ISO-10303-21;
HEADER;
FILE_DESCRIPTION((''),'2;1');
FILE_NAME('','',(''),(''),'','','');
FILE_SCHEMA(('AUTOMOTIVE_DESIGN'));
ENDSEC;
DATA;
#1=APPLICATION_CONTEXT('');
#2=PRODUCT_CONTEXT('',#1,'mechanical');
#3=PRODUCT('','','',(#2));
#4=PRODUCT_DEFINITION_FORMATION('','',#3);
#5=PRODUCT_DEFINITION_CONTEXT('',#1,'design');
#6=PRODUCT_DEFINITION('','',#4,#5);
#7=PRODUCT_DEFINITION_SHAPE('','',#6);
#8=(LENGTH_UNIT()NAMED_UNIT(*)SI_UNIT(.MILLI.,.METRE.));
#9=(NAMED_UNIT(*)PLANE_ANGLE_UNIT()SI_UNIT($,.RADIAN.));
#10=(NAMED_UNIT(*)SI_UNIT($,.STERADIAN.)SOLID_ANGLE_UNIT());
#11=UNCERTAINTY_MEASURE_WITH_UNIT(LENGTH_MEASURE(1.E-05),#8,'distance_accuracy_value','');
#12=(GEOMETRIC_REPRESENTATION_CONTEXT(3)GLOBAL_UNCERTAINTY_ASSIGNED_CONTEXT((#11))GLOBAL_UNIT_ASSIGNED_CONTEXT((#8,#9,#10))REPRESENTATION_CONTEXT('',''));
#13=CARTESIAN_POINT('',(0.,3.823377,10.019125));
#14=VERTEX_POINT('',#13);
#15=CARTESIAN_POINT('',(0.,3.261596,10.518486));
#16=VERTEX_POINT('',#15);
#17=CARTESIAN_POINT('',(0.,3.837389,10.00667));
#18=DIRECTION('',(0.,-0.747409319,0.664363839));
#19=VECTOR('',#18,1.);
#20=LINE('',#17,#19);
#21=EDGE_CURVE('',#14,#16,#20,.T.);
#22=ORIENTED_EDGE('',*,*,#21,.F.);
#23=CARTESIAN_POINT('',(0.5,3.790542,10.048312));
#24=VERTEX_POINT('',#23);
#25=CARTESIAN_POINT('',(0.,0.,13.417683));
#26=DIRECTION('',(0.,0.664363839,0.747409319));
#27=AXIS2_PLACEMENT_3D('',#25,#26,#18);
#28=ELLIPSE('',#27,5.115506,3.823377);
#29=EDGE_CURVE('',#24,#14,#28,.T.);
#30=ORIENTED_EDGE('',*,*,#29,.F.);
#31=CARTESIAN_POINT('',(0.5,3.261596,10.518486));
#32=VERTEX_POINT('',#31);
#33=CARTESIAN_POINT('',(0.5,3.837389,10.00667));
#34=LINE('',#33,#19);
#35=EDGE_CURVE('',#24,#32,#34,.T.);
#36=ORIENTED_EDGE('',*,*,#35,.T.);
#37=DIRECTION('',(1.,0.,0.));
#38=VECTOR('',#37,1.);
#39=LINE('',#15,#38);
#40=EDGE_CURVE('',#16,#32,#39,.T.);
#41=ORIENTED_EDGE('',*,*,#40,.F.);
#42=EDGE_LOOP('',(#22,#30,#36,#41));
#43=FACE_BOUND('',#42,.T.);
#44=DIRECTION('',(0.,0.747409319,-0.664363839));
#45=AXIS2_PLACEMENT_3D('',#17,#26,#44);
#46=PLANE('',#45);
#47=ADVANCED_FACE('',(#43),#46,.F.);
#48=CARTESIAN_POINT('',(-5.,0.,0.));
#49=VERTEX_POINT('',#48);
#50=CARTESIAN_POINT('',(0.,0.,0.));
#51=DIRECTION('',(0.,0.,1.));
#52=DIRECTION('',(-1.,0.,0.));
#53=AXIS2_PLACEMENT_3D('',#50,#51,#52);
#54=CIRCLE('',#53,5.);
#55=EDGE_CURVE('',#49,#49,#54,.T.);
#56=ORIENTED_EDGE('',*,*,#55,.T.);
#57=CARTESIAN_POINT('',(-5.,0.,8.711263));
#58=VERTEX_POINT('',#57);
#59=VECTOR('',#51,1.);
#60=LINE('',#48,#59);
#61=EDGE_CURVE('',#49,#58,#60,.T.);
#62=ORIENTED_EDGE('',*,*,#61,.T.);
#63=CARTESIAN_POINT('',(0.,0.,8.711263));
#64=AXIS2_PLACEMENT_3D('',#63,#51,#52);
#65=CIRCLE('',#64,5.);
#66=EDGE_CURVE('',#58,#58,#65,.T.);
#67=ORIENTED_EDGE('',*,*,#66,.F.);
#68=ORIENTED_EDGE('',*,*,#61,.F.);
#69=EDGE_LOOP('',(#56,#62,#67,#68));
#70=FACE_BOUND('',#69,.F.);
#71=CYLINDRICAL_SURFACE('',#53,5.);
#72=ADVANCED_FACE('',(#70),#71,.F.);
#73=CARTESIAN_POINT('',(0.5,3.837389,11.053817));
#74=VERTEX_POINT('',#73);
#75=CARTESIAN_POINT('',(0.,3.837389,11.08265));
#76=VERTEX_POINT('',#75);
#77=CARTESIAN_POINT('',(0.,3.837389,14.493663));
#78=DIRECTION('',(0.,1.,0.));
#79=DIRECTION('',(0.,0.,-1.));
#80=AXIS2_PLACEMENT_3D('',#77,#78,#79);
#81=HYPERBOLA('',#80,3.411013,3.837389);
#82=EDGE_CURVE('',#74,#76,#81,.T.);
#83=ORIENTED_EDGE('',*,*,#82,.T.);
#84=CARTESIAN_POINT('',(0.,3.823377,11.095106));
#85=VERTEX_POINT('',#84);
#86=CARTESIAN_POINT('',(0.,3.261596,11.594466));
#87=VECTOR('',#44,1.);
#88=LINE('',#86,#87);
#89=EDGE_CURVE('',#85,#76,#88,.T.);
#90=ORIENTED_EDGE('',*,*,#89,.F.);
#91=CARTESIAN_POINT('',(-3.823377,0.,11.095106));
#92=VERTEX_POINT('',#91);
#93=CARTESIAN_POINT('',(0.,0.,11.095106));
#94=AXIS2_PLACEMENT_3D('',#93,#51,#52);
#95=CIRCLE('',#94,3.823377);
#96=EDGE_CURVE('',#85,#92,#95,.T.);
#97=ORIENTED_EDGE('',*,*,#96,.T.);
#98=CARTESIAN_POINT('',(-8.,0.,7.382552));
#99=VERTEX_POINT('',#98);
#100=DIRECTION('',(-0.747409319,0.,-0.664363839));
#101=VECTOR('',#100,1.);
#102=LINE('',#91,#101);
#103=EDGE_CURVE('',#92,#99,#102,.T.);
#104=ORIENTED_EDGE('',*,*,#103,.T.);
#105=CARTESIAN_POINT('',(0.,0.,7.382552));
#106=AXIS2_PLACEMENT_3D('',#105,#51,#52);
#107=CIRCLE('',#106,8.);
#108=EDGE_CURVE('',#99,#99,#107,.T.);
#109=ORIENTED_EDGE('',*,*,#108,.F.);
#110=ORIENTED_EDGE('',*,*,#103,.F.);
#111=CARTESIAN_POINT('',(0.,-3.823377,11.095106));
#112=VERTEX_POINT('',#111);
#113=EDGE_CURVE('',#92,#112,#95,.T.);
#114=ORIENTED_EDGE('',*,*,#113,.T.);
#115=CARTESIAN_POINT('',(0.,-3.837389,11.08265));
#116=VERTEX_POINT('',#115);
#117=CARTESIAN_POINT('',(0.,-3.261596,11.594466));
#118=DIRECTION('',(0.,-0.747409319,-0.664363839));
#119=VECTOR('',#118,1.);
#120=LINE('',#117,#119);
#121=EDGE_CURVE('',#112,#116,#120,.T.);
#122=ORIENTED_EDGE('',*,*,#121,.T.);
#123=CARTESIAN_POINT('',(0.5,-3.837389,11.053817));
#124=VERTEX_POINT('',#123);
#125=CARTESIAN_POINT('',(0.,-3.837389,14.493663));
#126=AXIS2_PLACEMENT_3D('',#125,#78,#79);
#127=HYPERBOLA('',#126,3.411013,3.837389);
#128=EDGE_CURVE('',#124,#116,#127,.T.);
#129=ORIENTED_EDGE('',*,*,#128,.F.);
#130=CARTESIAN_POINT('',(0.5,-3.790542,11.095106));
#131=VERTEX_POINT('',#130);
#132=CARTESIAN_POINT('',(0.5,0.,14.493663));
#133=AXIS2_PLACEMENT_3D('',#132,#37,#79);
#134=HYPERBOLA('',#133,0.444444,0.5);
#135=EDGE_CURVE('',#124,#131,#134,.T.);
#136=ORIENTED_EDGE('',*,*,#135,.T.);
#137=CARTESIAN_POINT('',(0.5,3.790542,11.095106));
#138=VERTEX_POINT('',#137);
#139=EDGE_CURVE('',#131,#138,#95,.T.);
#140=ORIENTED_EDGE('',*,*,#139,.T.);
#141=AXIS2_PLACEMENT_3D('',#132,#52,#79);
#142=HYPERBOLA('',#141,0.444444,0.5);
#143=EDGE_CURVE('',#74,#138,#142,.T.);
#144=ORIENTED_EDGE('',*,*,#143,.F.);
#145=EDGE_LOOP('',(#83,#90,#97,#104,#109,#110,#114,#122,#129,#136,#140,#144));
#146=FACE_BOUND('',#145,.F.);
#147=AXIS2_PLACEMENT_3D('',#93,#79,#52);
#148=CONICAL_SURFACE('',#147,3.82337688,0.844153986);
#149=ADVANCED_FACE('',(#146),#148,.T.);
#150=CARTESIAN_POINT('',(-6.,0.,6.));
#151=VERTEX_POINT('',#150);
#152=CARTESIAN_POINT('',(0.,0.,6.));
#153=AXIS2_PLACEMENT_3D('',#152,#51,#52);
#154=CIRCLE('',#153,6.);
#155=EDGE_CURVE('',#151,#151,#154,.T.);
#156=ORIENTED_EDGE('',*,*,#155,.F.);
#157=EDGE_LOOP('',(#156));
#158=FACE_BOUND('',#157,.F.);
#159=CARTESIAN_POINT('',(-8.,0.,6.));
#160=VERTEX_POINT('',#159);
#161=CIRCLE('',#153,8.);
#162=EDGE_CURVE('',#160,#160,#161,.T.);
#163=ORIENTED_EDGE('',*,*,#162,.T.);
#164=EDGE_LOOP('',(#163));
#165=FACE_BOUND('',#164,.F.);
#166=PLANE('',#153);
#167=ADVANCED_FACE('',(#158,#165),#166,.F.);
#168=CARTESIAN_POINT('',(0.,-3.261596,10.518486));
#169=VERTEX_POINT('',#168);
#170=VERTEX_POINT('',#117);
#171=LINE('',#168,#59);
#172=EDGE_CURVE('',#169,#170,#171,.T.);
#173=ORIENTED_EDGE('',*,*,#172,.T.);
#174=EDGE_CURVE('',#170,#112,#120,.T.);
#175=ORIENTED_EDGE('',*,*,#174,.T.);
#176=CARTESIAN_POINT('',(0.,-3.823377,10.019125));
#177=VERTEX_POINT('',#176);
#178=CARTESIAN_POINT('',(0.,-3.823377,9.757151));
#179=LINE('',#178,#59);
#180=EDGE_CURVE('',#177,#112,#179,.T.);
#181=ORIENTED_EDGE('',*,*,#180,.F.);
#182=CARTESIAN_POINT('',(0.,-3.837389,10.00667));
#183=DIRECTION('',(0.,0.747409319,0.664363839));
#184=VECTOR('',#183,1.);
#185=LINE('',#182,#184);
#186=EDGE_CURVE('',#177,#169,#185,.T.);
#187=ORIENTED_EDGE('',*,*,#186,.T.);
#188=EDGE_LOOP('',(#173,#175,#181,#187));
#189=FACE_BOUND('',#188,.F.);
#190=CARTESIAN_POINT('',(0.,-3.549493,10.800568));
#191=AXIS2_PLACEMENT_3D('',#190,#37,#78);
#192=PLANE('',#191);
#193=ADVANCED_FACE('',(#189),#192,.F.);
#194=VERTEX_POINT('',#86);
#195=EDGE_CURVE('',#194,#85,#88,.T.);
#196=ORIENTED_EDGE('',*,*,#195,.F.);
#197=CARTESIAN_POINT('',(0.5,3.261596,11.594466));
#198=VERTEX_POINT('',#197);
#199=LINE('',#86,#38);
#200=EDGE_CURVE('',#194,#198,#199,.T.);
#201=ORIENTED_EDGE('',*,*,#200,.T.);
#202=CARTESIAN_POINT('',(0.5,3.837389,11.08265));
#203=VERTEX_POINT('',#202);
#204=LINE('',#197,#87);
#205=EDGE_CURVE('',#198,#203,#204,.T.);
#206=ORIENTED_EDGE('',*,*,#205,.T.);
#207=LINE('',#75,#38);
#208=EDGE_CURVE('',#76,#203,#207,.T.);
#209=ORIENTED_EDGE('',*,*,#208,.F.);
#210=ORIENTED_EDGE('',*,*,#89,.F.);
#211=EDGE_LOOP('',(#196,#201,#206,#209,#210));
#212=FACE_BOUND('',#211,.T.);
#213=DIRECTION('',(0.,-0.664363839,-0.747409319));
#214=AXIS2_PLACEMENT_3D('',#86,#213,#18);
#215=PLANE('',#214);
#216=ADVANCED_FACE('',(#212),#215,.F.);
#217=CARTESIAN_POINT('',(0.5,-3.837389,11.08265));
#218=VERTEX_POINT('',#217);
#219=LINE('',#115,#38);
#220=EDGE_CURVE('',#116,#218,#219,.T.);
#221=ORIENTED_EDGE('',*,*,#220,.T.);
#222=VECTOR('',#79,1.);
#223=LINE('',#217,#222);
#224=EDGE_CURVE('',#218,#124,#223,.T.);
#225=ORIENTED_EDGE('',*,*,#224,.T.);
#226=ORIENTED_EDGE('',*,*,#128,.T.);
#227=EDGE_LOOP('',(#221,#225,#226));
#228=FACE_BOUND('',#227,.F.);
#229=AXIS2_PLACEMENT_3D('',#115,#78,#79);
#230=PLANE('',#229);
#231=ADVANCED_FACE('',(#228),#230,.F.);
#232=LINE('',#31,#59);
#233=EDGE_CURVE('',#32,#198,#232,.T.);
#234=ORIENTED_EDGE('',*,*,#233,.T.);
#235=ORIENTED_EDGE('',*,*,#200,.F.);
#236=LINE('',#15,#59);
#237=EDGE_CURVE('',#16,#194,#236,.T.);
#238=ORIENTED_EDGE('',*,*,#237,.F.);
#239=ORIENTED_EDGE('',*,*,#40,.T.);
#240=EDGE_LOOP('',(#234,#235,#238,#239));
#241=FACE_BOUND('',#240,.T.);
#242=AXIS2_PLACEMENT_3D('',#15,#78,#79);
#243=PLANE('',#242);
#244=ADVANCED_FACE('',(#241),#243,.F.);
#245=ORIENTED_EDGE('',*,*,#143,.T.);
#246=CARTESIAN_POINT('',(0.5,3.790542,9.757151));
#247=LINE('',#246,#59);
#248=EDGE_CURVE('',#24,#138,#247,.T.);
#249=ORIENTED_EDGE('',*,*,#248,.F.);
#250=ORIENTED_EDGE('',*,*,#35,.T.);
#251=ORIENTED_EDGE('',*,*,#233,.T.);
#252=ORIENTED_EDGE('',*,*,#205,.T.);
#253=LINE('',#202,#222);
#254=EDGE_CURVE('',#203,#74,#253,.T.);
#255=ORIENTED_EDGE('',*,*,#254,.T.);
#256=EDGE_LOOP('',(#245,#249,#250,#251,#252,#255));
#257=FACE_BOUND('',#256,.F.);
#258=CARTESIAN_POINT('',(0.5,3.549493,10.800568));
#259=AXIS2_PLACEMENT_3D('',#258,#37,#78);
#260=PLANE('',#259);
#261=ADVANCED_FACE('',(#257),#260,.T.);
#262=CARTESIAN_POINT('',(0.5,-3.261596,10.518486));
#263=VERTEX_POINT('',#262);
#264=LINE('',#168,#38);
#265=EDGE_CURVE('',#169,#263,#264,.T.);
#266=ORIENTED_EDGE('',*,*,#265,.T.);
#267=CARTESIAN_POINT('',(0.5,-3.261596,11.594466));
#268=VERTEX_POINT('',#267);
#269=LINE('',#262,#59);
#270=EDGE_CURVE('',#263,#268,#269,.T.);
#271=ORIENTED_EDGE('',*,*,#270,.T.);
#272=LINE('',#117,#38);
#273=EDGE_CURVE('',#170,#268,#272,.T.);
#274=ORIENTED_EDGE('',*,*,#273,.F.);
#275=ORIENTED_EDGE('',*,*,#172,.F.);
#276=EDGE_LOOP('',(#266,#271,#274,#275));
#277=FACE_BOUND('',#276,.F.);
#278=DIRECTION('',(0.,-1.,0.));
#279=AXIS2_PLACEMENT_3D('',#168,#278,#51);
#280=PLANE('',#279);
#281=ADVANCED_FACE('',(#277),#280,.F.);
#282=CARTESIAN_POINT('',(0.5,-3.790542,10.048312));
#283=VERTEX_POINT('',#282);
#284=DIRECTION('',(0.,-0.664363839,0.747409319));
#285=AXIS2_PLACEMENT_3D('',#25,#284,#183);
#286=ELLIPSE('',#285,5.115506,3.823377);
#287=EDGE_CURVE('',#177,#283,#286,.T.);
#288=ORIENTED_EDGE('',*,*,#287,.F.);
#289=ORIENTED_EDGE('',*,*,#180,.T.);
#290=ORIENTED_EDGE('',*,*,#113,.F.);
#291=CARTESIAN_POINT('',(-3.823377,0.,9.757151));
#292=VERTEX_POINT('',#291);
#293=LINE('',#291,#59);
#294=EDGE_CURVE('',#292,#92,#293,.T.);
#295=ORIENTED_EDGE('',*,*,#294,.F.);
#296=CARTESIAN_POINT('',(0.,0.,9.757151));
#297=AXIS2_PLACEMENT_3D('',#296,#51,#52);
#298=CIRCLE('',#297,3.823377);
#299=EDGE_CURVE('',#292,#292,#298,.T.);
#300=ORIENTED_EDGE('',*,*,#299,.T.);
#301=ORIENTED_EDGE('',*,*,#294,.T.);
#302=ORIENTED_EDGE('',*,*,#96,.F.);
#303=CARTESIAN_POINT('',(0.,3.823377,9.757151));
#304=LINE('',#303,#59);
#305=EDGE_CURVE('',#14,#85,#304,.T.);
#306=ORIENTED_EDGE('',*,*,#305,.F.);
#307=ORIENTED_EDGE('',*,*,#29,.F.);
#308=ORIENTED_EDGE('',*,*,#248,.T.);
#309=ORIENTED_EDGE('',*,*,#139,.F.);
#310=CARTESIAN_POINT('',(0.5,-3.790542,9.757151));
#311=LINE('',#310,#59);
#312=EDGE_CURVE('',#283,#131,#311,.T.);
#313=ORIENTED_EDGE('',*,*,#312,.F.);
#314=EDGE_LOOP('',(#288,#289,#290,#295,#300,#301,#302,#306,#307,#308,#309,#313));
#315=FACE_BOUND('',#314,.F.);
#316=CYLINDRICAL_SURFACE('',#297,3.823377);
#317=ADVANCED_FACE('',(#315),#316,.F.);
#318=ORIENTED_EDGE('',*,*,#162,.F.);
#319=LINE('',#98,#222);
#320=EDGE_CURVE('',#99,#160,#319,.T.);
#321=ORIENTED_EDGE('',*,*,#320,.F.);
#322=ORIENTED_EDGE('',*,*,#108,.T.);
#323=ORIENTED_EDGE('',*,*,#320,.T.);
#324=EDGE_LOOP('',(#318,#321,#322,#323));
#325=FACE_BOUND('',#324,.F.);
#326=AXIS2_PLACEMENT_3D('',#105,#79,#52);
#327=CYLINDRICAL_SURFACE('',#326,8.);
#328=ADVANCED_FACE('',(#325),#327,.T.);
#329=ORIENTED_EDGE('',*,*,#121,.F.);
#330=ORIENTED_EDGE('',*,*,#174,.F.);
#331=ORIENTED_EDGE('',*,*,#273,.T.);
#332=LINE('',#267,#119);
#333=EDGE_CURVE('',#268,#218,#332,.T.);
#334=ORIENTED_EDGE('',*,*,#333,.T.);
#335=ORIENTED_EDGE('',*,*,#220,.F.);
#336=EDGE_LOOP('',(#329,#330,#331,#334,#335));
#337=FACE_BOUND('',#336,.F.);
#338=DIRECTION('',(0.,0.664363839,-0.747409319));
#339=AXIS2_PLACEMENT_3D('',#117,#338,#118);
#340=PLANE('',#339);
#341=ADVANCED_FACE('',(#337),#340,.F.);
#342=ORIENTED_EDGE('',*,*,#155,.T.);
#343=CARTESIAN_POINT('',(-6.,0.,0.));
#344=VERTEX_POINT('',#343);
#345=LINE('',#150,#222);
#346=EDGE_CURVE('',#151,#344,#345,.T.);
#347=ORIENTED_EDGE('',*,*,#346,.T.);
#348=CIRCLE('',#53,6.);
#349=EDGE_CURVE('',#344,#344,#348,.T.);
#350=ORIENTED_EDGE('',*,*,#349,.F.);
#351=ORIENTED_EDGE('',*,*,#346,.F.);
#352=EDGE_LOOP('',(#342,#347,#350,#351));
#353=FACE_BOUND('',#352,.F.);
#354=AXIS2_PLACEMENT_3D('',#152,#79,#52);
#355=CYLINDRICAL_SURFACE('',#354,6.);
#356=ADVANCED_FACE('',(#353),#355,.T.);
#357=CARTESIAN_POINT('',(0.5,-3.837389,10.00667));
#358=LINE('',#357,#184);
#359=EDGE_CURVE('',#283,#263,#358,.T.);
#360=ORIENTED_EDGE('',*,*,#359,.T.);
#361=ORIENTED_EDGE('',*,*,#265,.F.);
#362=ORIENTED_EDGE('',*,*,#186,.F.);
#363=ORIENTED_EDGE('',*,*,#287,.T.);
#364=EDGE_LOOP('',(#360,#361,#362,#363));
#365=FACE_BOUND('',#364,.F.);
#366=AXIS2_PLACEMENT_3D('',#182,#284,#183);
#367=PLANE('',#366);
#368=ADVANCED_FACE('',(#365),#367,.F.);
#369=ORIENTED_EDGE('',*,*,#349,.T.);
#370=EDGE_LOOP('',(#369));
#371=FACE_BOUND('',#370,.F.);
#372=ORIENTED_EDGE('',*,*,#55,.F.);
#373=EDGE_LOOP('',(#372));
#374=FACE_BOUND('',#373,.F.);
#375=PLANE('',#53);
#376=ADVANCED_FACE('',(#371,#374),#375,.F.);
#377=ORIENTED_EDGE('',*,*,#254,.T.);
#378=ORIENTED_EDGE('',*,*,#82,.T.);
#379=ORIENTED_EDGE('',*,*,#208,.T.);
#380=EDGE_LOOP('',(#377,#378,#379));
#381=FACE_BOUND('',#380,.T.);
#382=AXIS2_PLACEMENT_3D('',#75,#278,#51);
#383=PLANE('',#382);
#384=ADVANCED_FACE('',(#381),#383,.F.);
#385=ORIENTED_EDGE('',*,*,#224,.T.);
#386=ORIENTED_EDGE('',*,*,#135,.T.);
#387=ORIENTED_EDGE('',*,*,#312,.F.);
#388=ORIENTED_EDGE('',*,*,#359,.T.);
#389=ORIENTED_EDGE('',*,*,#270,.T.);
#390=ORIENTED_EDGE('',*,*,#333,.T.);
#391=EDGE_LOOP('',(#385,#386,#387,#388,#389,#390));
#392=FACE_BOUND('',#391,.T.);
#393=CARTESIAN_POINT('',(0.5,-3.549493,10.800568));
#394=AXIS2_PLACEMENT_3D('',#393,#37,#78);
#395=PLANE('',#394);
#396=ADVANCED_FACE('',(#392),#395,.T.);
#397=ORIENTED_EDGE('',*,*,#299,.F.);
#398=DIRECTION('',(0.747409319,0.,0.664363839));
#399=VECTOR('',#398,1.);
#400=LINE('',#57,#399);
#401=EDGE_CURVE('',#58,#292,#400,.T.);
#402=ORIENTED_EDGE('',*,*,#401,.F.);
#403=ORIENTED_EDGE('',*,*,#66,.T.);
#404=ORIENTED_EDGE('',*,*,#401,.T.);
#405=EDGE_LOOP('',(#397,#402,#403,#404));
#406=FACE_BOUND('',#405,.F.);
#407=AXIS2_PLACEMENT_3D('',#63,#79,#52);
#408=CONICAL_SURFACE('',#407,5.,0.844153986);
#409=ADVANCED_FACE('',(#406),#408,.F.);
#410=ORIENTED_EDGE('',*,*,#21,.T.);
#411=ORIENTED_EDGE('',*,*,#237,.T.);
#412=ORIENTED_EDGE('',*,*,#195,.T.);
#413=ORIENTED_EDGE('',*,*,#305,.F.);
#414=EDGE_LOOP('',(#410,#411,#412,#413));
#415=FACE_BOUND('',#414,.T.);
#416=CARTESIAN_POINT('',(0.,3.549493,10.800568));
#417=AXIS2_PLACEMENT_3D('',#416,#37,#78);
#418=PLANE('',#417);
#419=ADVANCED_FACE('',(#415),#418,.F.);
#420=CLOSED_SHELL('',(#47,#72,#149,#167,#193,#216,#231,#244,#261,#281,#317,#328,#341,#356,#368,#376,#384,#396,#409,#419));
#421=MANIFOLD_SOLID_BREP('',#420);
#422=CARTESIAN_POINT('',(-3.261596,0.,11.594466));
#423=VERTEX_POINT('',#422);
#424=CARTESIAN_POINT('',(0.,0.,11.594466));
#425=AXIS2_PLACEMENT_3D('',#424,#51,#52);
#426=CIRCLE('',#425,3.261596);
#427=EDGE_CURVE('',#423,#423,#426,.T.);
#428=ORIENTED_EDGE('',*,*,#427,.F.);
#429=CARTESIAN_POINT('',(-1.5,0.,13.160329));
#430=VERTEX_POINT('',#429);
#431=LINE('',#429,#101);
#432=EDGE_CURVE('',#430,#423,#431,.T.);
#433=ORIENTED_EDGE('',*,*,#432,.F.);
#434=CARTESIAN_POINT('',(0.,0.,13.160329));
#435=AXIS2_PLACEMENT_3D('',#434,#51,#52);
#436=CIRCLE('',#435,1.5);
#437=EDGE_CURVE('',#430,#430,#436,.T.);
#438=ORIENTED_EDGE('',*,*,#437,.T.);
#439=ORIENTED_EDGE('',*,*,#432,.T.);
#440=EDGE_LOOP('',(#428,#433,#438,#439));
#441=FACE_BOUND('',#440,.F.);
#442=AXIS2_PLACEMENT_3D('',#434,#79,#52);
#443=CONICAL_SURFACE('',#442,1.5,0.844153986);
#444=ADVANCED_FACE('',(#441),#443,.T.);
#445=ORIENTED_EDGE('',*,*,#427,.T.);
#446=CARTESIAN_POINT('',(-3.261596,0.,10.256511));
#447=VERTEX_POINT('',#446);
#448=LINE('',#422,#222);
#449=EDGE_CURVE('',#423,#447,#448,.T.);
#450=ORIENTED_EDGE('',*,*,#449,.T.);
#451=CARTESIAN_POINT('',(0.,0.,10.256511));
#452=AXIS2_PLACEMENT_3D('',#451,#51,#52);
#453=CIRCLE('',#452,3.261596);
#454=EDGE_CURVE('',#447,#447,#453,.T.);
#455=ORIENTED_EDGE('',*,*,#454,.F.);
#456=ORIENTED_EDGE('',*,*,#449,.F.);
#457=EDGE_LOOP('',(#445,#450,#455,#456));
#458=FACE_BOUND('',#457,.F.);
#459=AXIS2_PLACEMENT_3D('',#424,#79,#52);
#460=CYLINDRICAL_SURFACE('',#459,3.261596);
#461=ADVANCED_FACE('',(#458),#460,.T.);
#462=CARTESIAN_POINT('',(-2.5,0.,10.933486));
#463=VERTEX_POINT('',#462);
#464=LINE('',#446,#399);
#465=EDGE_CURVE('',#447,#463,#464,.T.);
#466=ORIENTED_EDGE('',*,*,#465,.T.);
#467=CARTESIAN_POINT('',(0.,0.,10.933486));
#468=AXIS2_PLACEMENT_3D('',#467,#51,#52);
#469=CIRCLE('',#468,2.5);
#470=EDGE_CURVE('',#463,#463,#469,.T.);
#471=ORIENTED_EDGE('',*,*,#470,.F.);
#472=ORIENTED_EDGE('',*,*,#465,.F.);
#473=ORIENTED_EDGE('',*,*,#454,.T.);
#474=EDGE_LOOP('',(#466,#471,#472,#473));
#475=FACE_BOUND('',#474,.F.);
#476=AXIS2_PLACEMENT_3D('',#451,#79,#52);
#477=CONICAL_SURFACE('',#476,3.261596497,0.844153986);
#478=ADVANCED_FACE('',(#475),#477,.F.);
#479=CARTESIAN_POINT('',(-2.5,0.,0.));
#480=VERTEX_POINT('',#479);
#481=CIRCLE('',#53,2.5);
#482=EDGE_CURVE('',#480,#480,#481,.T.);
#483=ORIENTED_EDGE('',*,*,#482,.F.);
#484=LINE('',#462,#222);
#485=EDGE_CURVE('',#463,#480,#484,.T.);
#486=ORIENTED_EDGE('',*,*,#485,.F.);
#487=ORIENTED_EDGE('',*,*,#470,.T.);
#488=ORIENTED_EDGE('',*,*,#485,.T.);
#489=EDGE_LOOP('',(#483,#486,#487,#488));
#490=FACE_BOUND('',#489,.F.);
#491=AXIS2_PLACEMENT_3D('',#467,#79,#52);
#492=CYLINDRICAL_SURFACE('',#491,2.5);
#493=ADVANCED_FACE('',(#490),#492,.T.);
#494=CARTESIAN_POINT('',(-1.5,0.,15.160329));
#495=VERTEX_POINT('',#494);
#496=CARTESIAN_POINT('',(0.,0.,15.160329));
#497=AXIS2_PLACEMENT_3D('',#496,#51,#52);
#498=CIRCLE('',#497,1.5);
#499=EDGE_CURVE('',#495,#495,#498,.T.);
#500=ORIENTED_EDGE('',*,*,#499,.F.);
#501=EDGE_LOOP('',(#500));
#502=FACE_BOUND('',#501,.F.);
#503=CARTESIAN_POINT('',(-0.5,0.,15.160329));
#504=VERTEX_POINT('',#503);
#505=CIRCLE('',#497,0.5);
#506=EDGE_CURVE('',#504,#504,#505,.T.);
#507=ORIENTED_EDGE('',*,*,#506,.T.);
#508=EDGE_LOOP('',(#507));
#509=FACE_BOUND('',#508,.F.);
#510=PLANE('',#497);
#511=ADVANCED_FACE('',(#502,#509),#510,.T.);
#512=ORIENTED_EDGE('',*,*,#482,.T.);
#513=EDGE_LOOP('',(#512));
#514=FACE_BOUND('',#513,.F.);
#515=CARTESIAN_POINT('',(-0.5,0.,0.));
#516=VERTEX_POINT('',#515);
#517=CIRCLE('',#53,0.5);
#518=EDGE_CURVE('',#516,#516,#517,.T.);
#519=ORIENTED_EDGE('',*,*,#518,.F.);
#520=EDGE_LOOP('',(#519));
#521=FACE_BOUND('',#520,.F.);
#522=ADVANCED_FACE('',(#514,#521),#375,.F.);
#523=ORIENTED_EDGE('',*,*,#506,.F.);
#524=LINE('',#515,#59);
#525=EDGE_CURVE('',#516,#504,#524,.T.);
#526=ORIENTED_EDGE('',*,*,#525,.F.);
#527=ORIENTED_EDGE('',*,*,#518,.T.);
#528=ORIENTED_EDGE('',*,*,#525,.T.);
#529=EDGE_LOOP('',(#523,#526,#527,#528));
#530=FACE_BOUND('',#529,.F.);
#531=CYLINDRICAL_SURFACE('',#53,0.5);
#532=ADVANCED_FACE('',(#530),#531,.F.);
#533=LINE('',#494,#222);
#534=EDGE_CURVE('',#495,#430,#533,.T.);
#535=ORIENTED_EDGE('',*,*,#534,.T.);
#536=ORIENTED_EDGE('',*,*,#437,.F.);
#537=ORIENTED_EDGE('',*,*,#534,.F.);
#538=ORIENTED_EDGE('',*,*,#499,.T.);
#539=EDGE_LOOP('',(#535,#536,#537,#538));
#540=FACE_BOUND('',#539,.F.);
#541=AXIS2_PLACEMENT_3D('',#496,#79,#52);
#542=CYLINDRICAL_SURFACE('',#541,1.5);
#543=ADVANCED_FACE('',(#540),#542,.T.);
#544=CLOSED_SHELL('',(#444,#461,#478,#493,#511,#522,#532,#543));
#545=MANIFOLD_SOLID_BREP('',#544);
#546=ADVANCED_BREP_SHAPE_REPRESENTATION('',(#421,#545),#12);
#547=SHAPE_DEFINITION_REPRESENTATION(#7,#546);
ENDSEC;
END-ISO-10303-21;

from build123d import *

# Parameters (mm, degrees)
F3_DEPTH = 0.5


# Not quite as in the source:
# - a pattern or mirror of a feature is missing from the dataset's text; its kind, count and spacing are read off the source's solid


with BuildPart() as f1:
    # F0 (on Front) → F1 (revolve)
    with BuildSketch(Plane.XZ):
        Polygon((-6, 6), (-6, 0), (-5, 0), (-5, 8.7112633561), (-3.8233768799, 9.7571505739), (-3.8233768799, 11.0951055271), (-8, 7.3825516426), (-8, 6), align=None)
    revolve(axis=Axis((0, 0, 1.3750899837), (0, 0, 1)))

    # F2 (on Right) → F3 (join)
    with BuildSketch(Plane.YZ):
        Polygon((-3.261596497, 10.5184856802), (-3.261596497, 11.5944658675), (-3.8373894771, 11.0826498851), (-3.8373894771, 10.0066696978), align=None)
    f3 = extrude(amount=F3_DEPTH)

    # F3_copies: F3 across plane
    add(f3.mirror(Plane.ZX))


with BuildPart() as f1b:
    # F0 (on Front) → F1, piece 2 (revolve)
    with BuildSketch(Plane.XZ):
        Polygon((-1.5, 15.1603294204), (-1.5, 13.1603294204), (-3.261596497, 11.5944658675), (-3.261596497, 10.2565109143), (-2.5, 10.9334855783), (-2.5, 0), (-0.5, 0), (-0.5, 12.7112633561), (-0.5, 15.1603294204), align=None)
    revolve(axis=Axis((0, 0, 1.3750899837), (0, 0, 1)))


solid = Compound([f1.part, f1b.part])
